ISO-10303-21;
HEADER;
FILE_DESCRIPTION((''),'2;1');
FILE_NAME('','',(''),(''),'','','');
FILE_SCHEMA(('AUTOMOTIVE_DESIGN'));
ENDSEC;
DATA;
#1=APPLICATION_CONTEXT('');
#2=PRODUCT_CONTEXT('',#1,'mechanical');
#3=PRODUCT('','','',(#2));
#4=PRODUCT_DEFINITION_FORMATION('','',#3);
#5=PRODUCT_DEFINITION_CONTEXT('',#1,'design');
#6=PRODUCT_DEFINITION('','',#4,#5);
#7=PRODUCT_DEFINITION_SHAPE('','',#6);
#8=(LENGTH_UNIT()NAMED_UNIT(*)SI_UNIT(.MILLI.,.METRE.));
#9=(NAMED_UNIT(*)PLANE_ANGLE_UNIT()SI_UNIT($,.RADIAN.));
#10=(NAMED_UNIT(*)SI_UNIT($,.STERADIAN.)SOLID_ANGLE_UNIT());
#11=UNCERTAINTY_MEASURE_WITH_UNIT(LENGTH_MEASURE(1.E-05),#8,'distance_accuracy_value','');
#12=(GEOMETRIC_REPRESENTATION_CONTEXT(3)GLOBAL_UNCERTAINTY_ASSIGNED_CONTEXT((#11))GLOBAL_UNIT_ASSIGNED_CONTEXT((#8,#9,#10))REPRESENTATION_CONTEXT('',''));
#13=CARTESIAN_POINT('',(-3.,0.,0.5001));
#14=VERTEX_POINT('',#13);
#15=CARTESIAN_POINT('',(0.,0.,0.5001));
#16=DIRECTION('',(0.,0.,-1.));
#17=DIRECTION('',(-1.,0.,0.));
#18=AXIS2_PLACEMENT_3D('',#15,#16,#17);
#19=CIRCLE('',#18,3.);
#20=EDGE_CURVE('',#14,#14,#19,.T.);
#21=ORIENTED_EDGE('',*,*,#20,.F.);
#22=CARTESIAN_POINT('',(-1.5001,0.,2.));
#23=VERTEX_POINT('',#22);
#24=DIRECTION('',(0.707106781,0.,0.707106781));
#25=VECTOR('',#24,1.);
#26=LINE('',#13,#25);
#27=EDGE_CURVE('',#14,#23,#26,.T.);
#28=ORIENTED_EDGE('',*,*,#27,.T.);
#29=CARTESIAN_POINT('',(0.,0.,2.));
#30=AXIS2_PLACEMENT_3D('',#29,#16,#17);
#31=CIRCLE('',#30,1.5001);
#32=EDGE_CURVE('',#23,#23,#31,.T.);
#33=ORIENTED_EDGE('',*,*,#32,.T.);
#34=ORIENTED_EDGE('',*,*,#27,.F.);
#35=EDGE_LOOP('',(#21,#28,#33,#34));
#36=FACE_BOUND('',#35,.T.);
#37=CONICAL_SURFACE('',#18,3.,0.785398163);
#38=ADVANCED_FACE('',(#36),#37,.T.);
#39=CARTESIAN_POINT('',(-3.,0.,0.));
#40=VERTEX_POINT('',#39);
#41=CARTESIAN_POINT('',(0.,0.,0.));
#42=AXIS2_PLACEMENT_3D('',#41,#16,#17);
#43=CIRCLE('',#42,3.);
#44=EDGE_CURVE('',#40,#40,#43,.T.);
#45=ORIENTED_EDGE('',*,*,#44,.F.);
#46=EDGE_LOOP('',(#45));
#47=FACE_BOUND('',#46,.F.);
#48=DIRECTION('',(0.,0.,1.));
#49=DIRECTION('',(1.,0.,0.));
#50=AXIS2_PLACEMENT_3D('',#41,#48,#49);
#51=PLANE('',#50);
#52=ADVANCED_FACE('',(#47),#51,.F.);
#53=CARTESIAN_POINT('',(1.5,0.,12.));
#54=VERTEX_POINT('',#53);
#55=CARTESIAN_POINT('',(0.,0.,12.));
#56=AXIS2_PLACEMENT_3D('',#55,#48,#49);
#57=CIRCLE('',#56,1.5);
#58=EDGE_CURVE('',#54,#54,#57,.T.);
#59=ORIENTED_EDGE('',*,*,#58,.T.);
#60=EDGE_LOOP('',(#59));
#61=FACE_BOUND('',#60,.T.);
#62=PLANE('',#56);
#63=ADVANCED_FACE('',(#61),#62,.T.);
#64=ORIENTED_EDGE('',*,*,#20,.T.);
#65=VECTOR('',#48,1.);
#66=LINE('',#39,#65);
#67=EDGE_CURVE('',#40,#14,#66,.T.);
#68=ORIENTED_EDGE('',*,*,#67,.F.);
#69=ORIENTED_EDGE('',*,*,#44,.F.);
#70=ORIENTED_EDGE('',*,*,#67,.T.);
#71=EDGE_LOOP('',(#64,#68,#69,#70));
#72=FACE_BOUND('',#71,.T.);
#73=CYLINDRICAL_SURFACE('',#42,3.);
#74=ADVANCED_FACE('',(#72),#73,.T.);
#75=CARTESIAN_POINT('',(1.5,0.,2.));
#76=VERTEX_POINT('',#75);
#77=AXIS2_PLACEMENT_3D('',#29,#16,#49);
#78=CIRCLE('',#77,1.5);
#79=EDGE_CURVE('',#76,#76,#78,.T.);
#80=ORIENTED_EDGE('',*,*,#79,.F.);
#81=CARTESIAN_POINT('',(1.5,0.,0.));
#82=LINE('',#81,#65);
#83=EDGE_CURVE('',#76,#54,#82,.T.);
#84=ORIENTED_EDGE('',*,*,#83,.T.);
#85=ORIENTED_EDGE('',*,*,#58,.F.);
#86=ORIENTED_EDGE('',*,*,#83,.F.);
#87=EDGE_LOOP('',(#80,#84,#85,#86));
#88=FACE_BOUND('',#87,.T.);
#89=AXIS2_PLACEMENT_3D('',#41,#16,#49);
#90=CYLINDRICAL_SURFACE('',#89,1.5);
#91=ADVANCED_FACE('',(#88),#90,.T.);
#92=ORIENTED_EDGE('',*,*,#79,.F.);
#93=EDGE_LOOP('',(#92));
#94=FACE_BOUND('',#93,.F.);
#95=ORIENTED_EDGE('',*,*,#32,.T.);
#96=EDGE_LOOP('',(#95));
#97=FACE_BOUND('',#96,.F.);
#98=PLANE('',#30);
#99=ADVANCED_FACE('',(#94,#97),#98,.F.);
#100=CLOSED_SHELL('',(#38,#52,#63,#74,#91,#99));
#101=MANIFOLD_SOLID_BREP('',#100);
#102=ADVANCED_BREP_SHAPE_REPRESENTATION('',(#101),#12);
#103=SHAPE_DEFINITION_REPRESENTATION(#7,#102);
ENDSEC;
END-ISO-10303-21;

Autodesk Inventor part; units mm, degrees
ref_plane "YZ Plane" through (0, 0, 0) normal (1, 0, 0) x (0, 1, 0)
ref_plane "XZ Plane" through (0, 0, 0) normal (0, 1, 0) x (-1, 0, 0)
ref_plane "XY Plane" through (0, 0, 0) normal (0, 0, 1) x (1, 0, 0)
sketch "スケッチ1" plane through (0, 0, 0) normal (0, 0, 1) x (1, 0, 0)
  circle A0 centre (0, 0) radius 1.5
  dimension "d0" = 3
extrude "押し出し1" add sketch "スケッチ1" along normal blind 12
sketch "スケッチ2" plane through (0, 0, 0) normal (0, 0, -1) x (-1, 0, 0)
  circle A0 centre (0, 0) radius 3
  dimension "d3" = 6
extrude "押し出し2" add sketch "スケッチ2" against normal blind 2
thread "ねじ1" size "M3x0.5" class "6g" standard "ANSI Metric M Profile" full length
chamfer "面取り1" distance 1.5 angle 45 1 edges at (3, 0, 2)
properties part number "ネジ皿m3,12" material "鋼、高強度、低合金"
